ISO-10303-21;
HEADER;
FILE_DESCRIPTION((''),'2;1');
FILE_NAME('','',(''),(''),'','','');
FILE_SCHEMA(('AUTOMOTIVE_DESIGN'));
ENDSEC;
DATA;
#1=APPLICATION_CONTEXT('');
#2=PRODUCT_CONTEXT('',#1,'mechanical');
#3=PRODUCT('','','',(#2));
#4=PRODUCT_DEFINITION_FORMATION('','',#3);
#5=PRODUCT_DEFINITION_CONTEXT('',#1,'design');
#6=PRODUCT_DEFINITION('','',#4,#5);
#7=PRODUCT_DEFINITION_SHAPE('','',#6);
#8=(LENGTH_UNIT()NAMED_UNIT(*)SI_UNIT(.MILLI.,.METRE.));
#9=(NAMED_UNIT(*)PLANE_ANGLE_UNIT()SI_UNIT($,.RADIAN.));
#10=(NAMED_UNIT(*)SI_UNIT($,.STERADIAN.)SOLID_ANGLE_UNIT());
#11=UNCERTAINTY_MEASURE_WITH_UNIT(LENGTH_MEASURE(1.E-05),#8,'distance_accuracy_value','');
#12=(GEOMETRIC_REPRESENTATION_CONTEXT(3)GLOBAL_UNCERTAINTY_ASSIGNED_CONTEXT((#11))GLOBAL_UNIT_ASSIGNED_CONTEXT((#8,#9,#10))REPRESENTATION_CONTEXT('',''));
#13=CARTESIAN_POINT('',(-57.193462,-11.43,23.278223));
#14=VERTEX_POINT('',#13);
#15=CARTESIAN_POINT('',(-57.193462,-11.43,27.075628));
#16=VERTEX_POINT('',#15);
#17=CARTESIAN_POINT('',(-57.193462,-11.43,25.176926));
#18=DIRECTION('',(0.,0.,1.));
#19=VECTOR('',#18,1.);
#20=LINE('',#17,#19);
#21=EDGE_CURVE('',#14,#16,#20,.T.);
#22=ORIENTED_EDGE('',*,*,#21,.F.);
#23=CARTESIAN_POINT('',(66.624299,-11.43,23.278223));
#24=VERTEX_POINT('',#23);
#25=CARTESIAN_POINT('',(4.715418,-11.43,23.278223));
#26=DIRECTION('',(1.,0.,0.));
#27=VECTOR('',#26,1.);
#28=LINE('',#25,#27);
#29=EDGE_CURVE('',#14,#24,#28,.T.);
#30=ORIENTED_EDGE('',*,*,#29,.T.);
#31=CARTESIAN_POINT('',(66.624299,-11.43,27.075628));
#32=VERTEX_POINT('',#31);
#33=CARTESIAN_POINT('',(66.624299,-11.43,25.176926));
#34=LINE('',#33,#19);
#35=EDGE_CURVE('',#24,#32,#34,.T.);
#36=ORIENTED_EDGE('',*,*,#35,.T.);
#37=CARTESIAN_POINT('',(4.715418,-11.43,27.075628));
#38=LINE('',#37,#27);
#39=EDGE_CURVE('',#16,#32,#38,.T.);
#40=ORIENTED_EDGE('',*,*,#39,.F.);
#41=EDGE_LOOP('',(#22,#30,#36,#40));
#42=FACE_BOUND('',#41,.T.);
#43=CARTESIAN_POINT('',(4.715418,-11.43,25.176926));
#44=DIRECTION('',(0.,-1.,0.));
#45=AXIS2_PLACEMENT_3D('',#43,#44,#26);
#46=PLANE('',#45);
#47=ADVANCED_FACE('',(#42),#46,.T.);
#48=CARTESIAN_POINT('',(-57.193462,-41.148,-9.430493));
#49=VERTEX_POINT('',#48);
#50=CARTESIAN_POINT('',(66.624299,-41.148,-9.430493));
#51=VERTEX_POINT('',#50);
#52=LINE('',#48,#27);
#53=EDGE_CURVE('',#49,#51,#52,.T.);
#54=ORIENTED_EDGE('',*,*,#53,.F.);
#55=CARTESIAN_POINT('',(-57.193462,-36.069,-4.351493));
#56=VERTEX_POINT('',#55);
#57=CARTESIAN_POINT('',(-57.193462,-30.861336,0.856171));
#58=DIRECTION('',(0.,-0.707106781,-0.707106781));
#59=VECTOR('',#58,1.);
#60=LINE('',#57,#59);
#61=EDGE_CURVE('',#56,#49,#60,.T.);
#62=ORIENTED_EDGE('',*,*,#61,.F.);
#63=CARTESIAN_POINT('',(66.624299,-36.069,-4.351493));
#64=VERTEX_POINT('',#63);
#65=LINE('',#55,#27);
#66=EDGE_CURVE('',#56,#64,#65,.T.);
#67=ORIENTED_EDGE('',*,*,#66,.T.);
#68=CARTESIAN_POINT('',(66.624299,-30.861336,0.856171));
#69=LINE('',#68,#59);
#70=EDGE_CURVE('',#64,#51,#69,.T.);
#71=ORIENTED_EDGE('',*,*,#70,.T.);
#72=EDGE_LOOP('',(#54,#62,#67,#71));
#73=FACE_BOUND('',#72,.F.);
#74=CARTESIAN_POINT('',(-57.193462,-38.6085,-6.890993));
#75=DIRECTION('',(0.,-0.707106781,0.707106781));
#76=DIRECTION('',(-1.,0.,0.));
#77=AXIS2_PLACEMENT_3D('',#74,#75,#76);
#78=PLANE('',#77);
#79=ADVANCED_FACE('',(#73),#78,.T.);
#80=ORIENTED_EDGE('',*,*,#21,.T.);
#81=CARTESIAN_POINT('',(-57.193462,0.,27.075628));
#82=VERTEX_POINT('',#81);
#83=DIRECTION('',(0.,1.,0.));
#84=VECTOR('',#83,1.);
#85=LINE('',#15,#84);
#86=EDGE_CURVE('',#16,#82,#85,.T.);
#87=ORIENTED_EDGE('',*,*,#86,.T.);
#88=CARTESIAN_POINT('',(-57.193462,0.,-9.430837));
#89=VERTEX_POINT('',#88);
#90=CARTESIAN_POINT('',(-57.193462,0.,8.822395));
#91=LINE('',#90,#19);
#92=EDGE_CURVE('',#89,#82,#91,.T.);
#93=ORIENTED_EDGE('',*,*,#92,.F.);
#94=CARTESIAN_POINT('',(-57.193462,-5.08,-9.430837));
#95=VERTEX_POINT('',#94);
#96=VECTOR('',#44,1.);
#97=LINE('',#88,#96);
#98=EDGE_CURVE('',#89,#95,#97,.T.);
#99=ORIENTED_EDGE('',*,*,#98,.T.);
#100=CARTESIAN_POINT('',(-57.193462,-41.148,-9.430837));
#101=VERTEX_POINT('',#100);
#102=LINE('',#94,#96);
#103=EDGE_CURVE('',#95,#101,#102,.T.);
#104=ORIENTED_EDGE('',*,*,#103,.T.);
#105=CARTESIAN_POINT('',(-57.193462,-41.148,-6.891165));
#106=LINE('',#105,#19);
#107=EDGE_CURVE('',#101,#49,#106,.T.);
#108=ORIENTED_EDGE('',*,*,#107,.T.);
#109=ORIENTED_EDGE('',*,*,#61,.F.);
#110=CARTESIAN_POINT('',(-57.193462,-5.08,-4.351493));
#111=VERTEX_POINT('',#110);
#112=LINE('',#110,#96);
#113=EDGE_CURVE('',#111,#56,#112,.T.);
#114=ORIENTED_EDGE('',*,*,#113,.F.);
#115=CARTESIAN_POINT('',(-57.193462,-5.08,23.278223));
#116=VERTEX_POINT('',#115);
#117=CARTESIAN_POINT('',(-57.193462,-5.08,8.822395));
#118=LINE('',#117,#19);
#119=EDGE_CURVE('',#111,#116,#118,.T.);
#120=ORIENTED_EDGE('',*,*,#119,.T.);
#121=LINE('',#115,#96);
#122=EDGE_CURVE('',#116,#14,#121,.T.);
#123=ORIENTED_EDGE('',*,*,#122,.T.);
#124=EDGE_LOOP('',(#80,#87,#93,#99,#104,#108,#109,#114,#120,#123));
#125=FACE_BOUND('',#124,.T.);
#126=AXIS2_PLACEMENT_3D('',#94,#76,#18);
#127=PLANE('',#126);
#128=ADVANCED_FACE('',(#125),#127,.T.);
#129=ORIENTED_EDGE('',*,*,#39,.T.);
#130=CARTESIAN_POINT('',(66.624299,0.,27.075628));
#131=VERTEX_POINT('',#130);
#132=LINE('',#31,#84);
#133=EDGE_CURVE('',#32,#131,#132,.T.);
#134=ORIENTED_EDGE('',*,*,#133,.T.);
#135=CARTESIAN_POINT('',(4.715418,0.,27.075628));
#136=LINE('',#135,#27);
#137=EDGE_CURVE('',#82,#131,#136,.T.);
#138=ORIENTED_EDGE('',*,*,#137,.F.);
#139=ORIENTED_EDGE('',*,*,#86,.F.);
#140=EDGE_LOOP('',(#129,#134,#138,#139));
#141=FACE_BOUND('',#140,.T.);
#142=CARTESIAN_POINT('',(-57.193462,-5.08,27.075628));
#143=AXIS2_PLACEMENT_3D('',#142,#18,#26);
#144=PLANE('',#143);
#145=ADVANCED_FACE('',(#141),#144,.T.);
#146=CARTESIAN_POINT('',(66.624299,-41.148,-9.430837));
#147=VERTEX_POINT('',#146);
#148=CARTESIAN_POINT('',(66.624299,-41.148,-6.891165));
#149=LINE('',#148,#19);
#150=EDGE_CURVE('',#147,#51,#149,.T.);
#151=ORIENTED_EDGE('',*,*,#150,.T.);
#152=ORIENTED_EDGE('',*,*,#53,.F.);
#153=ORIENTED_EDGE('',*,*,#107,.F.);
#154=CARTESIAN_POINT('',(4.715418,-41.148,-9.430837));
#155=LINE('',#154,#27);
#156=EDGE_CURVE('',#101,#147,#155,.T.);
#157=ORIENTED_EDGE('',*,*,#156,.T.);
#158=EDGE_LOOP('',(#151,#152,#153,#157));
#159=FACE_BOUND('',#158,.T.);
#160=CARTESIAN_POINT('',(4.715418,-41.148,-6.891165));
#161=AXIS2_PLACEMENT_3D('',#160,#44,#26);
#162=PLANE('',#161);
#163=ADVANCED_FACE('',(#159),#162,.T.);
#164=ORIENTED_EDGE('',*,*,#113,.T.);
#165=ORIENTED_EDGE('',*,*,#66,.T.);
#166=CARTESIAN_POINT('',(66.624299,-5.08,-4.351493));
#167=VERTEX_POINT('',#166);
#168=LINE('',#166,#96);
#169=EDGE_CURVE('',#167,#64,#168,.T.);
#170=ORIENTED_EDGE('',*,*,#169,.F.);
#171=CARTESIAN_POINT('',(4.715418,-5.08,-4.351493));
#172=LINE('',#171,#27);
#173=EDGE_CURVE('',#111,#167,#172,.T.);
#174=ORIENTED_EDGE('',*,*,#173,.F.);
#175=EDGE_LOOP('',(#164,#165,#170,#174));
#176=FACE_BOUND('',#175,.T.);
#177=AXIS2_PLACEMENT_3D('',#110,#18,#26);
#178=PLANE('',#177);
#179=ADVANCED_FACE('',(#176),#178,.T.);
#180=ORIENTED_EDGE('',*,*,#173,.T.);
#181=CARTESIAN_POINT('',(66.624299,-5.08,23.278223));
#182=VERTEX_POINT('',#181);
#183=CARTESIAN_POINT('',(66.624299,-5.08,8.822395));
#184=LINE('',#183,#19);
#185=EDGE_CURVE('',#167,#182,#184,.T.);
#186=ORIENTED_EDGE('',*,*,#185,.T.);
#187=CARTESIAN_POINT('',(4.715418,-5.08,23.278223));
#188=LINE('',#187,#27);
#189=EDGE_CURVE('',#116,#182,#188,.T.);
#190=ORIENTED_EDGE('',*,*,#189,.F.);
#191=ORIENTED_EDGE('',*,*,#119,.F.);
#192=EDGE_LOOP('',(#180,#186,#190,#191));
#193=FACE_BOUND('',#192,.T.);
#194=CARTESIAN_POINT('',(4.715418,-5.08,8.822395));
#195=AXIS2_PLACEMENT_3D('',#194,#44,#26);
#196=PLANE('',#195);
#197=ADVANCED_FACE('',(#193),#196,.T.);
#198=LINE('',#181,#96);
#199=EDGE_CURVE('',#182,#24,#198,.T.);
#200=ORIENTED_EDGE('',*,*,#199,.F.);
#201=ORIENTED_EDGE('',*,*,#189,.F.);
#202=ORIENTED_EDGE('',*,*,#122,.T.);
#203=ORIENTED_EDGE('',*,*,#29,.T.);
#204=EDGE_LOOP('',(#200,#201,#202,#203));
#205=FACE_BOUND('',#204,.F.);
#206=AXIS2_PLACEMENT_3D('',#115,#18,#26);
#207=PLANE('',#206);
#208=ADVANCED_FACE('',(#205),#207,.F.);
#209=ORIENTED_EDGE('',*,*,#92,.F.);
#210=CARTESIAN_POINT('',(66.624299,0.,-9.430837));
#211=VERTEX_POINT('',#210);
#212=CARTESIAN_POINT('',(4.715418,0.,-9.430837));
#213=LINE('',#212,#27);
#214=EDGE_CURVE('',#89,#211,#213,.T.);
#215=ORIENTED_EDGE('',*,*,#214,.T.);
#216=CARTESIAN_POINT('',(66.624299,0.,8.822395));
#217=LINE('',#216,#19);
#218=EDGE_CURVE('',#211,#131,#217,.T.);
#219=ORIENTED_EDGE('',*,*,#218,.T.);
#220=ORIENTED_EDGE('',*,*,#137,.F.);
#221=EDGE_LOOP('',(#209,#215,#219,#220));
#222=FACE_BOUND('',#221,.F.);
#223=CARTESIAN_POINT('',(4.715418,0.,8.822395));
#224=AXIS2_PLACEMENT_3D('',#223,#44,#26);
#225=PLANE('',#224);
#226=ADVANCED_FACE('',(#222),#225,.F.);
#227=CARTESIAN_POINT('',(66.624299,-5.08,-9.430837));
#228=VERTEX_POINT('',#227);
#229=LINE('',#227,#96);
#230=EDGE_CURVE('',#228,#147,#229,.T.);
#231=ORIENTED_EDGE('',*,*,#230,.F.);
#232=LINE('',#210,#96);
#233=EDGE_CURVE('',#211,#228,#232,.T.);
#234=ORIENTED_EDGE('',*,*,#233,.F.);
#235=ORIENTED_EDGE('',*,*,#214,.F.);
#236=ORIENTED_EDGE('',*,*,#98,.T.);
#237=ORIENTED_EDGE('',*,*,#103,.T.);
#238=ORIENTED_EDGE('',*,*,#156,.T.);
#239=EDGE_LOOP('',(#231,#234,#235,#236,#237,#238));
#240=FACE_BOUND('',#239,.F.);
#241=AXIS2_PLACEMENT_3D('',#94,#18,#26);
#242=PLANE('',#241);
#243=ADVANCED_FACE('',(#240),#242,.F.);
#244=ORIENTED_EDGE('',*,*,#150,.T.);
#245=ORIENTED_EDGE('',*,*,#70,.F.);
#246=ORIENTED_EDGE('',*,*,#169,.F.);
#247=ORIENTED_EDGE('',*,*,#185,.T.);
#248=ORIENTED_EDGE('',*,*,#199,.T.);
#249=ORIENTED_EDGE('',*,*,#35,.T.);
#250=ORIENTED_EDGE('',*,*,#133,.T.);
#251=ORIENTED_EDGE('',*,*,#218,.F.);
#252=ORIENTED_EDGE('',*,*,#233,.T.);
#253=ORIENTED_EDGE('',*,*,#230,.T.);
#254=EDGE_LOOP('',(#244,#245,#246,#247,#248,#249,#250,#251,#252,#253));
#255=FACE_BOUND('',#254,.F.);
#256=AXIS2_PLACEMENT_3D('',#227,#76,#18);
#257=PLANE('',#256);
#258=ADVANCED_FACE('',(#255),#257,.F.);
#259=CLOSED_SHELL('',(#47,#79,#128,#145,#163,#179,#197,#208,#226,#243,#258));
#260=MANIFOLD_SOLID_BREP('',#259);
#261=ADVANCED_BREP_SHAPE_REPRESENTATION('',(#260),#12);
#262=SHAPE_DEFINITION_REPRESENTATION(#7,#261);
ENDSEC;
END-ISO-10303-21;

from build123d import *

# Parameters (mm, degrees)
F0_W     = 123.8177604973
F0_H     = 36.5064647049
F1_DEPTH = 5.08
F2_DEPTH = 4.826
F3_W     = 123.8177604973
F3_H     = 3.7974044681
F4_DEPTH = 6.35
F5_W     = 123.8177604973
F5_H     = 5.0793443806
F6_DEPTH = 36.068
F7_SIZE  = 5.079


# Not quite as in the source:
# - a fillet or chamfer is up to 0.001 mm smaller than in the source, because OpenCascade refuses the exact size


with BuildPart() as f1:
    # F0 (on Front) → F1 (new body)
    with BuildSketch(Plane.XZ):
        with Locations((4.7154184431, 8.8223954663)):
            Rectangle(F0_W, F0_H)
    extrude(amount=F1_DEPTH)

    # F0 (on Front) → F2 (join)
    with BuildSketch(Plane.XZ):
        with Locations((4.7154184431, 8.8223954663)):
            Rectangle(F0_W, F0_H)
    extrude(amount=F2_DEPTH)

    # F3 (on face) → F4 (join)
    with BuildSketch(Plane.XZ.offset(5.08)):
        with Locations((4.7154184431, 25.1769255847)):
            Rectangle(F3_W, F3_H)
    extrude(amount=F4_DEPTH)

    # F5 (on face) → F6 (join)
    with BuildSketch(Plane.XZ.offset(5.08)):
        with Locations((4.7154184431, -6.8911646958)):
            Rectangle(F5_W, F5_H)
    extrude(amount=F6_DEPTH)

    # F7 (size 5.08 in the source; OpenCascade refuses exactly that, so slightly less here)
    f7_edges = [f1.edges().sort_by_distance(p)[0] for p in [
        (4.715418, -41.148, -4.351493),
    ]]
    chamfer(f7_edges, length=F7_SIZE)


solid = f1.part
